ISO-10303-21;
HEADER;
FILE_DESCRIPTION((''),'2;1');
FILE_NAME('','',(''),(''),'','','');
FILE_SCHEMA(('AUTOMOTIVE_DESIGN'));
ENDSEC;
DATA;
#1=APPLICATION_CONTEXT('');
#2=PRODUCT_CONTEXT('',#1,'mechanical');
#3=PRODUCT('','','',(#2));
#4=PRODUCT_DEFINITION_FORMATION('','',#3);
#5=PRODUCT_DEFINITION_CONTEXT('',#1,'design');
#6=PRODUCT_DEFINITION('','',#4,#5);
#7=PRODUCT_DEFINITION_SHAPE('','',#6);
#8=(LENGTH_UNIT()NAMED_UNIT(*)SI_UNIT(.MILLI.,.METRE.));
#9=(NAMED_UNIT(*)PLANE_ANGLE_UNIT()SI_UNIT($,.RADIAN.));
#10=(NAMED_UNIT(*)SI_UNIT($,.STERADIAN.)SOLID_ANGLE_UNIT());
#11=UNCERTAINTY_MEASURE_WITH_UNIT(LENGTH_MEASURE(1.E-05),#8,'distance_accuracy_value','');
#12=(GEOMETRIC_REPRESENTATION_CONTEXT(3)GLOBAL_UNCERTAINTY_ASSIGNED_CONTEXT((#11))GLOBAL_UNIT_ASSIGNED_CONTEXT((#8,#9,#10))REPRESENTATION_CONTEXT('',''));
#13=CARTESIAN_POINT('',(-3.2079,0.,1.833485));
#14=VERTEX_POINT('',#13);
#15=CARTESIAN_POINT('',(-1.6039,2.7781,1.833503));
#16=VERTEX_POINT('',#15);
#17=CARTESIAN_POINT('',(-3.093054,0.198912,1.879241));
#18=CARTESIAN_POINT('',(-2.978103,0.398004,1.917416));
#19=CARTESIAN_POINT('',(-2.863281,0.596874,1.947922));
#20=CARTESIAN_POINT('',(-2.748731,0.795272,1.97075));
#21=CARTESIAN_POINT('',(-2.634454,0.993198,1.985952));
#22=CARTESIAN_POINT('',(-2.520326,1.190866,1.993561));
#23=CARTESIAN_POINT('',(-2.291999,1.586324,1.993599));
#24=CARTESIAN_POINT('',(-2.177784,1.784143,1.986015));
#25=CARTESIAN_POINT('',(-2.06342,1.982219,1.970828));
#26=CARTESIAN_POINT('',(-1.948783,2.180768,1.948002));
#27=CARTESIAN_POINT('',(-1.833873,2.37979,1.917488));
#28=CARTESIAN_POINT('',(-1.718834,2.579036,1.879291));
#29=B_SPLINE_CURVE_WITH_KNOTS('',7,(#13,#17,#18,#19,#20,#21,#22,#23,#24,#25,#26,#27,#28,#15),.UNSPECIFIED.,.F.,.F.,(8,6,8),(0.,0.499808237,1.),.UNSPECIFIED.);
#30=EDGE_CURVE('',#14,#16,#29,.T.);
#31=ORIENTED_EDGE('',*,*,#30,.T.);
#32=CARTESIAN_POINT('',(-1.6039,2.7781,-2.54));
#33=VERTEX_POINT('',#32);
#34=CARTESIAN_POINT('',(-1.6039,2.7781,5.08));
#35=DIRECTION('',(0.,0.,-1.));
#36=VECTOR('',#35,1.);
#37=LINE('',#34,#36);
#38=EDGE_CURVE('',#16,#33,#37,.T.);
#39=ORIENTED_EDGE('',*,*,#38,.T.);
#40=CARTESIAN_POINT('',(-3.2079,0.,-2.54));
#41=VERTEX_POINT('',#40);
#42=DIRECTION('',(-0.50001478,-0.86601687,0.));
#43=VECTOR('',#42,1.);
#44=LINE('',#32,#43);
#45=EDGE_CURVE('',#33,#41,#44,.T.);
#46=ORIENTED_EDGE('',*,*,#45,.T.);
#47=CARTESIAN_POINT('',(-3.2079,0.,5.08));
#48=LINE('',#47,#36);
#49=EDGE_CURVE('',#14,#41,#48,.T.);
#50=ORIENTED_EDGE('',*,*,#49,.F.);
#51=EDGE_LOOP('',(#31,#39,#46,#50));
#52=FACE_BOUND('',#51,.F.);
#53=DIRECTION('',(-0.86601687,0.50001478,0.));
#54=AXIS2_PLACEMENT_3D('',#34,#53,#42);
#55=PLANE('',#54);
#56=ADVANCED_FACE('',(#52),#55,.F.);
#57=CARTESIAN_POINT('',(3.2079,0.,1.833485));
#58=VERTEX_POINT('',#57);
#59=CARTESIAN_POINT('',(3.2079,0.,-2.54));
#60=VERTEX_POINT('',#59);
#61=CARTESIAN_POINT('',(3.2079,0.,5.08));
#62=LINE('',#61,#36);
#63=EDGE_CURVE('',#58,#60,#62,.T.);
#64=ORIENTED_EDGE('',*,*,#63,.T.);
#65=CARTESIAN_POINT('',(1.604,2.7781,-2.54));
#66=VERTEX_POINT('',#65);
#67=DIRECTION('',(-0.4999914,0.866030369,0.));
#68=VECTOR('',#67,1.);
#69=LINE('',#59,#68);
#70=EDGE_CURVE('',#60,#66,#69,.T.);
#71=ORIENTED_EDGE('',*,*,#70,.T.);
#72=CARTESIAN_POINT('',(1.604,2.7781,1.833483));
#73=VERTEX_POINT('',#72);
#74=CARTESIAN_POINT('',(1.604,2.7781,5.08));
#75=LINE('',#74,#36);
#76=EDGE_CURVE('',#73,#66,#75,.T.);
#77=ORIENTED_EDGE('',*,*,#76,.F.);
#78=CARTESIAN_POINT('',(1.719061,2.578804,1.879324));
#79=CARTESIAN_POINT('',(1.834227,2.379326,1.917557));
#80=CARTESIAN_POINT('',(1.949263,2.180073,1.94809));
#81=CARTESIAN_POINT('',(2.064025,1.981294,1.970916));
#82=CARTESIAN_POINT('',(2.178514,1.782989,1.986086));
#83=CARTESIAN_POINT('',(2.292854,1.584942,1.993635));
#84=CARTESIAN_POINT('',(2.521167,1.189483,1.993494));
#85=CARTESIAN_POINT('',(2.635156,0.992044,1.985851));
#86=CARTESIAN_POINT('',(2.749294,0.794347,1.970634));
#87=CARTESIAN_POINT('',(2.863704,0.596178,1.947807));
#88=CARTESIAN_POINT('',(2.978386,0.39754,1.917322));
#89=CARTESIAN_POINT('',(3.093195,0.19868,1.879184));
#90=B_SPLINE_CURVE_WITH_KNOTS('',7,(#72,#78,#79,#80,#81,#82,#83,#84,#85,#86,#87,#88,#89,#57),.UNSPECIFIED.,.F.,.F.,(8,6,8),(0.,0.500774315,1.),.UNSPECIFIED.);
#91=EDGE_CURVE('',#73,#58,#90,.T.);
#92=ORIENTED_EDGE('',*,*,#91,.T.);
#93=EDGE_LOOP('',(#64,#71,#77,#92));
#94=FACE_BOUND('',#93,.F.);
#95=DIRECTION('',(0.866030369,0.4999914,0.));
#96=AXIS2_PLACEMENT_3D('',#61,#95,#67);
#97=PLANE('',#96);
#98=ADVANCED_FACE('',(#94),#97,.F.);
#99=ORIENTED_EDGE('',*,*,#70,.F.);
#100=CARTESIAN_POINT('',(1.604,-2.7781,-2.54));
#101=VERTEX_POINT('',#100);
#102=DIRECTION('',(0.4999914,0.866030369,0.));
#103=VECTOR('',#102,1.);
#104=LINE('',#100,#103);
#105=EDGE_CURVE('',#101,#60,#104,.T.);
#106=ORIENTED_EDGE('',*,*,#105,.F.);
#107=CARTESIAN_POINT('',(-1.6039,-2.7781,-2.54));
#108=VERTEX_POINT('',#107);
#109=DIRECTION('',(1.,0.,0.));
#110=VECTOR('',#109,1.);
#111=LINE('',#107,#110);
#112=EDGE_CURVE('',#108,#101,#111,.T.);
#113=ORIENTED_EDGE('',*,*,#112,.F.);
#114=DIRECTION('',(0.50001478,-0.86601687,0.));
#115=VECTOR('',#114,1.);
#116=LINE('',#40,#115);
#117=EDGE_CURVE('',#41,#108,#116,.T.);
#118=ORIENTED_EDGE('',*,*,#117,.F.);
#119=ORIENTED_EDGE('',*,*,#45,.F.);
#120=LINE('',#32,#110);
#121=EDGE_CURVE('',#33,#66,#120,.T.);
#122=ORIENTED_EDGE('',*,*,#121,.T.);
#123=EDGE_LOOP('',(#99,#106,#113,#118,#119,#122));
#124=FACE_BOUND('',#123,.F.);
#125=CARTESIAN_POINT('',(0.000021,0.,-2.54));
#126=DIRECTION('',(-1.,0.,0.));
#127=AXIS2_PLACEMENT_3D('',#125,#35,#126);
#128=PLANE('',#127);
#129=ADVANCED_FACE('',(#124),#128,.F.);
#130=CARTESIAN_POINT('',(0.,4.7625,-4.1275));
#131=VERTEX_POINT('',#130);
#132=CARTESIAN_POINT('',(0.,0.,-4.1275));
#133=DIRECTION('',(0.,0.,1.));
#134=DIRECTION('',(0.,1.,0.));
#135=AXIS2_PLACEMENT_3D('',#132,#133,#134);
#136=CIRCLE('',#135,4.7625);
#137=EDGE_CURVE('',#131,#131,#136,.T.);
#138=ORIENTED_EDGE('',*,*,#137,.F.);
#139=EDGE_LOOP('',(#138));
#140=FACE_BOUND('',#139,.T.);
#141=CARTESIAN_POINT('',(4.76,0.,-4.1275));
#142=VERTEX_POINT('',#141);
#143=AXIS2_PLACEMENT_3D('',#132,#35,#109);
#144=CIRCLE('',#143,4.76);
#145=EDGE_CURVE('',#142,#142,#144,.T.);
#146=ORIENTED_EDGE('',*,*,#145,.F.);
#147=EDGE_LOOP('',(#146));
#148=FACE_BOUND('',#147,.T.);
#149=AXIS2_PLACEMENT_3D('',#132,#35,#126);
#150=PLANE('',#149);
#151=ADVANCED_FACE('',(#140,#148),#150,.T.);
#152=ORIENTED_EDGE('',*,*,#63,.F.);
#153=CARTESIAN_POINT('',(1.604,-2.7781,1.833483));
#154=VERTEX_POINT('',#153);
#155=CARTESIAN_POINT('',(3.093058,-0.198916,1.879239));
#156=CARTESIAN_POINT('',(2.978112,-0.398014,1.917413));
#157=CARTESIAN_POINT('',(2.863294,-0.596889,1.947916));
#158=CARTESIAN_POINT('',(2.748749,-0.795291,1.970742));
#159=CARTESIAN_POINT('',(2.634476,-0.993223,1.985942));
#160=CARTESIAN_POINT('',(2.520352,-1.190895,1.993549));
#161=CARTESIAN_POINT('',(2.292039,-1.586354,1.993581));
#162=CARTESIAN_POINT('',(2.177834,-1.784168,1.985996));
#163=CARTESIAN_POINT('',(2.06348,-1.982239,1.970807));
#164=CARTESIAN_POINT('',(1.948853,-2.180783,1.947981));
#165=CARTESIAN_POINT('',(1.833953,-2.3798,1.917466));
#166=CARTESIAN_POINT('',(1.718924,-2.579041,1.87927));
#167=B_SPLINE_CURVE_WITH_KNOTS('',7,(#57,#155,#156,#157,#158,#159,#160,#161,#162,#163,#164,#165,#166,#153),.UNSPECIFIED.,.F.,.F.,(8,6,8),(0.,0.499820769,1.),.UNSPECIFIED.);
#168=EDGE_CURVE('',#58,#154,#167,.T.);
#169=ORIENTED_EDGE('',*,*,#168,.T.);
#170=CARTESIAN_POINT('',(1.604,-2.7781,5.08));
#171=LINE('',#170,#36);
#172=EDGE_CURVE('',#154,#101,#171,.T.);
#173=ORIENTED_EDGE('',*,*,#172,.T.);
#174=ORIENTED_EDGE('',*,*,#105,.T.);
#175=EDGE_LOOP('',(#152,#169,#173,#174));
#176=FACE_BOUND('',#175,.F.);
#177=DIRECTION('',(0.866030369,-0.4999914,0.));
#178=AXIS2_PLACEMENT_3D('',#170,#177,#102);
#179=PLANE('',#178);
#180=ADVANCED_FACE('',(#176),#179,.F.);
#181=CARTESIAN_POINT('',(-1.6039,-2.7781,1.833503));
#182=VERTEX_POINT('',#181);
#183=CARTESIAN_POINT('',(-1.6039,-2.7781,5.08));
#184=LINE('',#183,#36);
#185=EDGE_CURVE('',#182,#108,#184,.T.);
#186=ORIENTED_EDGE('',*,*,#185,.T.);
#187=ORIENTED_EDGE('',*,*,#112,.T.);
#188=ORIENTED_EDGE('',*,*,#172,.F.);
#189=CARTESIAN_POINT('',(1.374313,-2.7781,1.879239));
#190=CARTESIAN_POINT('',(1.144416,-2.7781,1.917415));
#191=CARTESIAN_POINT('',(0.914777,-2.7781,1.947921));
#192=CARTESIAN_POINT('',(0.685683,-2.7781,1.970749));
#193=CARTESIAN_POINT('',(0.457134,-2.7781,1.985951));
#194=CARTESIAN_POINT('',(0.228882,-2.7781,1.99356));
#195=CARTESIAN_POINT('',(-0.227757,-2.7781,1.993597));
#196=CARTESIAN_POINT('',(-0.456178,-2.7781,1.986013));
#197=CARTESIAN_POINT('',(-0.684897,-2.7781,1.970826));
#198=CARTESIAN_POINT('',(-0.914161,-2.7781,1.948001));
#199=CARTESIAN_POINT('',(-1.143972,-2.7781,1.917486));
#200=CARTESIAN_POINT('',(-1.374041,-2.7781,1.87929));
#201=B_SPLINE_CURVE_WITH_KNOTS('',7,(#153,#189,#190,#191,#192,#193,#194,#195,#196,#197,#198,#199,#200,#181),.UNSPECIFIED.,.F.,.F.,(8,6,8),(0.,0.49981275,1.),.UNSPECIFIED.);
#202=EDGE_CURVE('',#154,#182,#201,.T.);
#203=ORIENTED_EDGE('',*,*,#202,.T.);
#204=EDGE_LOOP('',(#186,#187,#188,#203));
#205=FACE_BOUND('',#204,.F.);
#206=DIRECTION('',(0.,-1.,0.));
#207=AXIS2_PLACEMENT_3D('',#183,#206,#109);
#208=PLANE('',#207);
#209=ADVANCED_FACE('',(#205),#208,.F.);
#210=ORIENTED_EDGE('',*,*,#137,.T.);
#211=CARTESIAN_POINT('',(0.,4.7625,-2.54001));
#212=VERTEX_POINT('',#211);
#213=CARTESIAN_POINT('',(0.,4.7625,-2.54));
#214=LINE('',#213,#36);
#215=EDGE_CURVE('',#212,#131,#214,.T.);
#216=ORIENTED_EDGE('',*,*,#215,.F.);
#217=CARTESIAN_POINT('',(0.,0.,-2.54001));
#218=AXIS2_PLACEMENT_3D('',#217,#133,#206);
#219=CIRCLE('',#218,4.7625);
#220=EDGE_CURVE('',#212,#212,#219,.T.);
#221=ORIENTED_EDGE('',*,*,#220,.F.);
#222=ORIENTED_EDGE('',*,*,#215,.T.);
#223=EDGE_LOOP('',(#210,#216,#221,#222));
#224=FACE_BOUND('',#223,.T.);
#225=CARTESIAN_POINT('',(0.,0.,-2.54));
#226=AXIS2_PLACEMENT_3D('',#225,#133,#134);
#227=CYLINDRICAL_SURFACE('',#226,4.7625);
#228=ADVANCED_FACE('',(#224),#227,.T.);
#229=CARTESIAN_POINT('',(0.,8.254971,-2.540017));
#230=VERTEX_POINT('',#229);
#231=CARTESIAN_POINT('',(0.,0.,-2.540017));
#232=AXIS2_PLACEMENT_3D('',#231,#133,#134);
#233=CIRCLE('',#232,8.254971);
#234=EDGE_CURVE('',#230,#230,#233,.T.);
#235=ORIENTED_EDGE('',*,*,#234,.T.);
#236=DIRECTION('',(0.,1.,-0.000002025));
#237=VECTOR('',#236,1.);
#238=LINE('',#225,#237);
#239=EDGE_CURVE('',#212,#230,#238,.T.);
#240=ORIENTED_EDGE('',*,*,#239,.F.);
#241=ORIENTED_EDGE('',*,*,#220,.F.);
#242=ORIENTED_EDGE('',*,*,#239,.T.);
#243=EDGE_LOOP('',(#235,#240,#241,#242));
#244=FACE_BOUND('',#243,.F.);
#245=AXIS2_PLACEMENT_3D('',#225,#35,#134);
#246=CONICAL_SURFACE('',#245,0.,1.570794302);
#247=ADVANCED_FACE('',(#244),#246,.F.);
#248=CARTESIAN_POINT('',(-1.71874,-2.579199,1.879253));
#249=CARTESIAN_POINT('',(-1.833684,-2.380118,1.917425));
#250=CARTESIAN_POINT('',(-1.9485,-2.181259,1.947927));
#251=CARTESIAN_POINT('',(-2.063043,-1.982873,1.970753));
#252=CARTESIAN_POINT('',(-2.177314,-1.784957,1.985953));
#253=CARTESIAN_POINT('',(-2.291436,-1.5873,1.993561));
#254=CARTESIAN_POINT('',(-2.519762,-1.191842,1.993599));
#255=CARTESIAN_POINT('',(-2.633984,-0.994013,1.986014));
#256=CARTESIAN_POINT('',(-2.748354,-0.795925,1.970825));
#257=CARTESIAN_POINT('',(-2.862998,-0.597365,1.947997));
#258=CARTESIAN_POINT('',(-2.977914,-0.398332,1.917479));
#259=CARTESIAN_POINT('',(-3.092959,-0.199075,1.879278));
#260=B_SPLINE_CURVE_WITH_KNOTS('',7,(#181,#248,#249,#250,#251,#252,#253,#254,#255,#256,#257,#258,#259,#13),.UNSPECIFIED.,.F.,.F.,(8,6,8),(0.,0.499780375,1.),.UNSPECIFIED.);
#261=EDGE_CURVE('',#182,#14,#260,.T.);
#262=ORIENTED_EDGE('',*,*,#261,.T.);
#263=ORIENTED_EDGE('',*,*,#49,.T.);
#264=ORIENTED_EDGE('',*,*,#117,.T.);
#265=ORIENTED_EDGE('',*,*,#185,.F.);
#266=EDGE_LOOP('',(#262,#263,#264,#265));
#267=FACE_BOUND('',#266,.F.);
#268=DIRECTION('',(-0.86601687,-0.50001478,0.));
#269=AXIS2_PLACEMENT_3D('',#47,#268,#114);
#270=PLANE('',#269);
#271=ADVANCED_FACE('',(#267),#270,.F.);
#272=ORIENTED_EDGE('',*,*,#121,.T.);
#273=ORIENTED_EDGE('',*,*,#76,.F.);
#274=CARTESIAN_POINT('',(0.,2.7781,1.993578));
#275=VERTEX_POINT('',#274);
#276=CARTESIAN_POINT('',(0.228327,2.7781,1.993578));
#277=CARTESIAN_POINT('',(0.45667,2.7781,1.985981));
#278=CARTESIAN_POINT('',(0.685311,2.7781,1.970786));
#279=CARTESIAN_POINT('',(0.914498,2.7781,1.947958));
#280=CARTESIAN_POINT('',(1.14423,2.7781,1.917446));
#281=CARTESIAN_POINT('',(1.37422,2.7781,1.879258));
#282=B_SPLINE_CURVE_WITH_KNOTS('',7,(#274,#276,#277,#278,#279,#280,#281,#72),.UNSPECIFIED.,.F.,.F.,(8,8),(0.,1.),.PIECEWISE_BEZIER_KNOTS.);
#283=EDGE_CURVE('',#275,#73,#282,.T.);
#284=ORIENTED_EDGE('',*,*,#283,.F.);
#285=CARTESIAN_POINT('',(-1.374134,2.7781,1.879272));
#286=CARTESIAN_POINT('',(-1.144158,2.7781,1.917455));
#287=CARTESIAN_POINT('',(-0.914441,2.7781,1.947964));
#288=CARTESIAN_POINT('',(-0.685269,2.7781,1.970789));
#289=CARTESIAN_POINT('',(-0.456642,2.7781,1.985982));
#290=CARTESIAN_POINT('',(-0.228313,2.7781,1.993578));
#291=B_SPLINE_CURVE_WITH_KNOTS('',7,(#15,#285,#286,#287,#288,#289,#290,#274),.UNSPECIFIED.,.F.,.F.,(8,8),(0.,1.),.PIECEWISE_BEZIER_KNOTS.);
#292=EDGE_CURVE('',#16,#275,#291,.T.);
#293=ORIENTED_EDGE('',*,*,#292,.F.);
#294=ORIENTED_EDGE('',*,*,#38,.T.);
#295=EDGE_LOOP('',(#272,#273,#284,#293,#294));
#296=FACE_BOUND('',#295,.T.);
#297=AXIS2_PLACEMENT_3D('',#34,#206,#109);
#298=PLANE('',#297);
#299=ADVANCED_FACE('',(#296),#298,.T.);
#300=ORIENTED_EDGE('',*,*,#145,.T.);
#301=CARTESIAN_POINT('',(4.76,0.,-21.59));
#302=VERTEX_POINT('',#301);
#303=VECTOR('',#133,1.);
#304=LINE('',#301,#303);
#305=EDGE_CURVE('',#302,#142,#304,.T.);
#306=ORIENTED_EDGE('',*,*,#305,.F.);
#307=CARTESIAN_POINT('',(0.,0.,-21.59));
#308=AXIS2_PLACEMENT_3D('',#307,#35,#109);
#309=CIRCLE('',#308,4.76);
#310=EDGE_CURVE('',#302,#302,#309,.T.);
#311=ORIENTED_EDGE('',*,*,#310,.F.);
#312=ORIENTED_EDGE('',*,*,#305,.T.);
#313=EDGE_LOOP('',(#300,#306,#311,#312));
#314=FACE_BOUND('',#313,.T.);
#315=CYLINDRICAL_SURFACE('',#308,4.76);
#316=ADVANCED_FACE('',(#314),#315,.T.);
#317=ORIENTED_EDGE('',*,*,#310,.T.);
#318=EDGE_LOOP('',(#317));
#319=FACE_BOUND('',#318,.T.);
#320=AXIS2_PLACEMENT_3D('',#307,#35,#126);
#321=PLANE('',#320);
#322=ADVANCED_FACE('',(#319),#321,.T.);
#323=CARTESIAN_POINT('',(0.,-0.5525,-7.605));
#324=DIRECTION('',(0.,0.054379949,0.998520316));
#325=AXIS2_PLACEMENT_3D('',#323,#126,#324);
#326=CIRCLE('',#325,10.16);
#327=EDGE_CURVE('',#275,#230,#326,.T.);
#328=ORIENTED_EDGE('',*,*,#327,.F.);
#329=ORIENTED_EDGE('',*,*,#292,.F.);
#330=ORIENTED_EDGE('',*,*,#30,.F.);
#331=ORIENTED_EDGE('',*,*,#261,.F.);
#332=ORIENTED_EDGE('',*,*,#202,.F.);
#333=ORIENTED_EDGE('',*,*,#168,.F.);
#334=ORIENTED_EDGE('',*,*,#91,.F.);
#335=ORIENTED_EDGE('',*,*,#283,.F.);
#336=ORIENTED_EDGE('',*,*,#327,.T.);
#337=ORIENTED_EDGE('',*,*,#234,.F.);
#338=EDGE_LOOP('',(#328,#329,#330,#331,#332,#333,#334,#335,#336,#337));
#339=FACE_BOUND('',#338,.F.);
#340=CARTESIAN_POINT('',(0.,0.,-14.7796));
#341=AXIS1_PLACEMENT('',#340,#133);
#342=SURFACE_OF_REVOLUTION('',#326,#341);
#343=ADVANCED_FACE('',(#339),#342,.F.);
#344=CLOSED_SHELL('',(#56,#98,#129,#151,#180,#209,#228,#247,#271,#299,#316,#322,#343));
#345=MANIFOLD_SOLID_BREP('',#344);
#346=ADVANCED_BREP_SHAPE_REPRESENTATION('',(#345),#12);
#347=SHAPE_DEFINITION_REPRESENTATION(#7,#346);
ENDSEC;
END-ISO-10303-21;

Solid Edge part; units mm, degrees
sketch "Sketch1" plane through (0, 0, 0) normal (1, 0, 0) x (0, 1, 0)
  line L0 (0, -2.54) -> (0, 2.54)
  arc A0 (0, 2.54) -> (8.255, -2.54) centre (-0.5525, -7.605) cw
  line L1 (0, -2.54) -> (8.255, -2.54)
  dimension "D1" = 5.08
  dimension "D2" = 10.16
revolve "RevolvedProtrusion1" add sketch "Sketch1" angle 360 about axis through (0, 0, -14.7796) along (0, 0, 1)
sketch "Sketch2" plane through (0, 0, -2.54) normal (0, 0, -1) x (0, 1, 0)
  circle A0 centre (0, 0) radius 4.7625
  dimension "D1" = 9.525
extrude "Protrusion1" add sketch "Sketch2" along normal blind 19.05
sketch "Sketch3" plane through (0, 0, -21.59) normal (0, 0, -1) x (1, 0, 0)
  circle A0 centre (0, 0) radius 4.76
  dimension "D1" = 0.0025
extrude "Cutout1" cut sketch "Sketch3" against normal blind 17.4625 flip side to cut
sketch "Sketch4" plane through (-0.6032, 0.3606, 5.08) normal (0, 0, 1) x (1, 0, 0)
  line L0 (-1.0007, 2.4175) -> (2.2072, 2.4175)
  line L1 (3.8111, -0.3606) -> (2.2072, 2.4175)
  line L2 (2.2072, -3.1387) -> (3.8111, -0.3606)
  line L3 (-1.0007, -3.1387) -> (2.2072, -3.1387)
  line L4 (-2.6047, -0.3606) -> (-1.0007, -3.1387)
  line L5 (-1.0007, 2.4175) -> (-2.6047, -0.3606)
extrude "ExtrudedCutout_11" cut sketch "Sketch4" against normal blind 7.62
properties part number "163737"
